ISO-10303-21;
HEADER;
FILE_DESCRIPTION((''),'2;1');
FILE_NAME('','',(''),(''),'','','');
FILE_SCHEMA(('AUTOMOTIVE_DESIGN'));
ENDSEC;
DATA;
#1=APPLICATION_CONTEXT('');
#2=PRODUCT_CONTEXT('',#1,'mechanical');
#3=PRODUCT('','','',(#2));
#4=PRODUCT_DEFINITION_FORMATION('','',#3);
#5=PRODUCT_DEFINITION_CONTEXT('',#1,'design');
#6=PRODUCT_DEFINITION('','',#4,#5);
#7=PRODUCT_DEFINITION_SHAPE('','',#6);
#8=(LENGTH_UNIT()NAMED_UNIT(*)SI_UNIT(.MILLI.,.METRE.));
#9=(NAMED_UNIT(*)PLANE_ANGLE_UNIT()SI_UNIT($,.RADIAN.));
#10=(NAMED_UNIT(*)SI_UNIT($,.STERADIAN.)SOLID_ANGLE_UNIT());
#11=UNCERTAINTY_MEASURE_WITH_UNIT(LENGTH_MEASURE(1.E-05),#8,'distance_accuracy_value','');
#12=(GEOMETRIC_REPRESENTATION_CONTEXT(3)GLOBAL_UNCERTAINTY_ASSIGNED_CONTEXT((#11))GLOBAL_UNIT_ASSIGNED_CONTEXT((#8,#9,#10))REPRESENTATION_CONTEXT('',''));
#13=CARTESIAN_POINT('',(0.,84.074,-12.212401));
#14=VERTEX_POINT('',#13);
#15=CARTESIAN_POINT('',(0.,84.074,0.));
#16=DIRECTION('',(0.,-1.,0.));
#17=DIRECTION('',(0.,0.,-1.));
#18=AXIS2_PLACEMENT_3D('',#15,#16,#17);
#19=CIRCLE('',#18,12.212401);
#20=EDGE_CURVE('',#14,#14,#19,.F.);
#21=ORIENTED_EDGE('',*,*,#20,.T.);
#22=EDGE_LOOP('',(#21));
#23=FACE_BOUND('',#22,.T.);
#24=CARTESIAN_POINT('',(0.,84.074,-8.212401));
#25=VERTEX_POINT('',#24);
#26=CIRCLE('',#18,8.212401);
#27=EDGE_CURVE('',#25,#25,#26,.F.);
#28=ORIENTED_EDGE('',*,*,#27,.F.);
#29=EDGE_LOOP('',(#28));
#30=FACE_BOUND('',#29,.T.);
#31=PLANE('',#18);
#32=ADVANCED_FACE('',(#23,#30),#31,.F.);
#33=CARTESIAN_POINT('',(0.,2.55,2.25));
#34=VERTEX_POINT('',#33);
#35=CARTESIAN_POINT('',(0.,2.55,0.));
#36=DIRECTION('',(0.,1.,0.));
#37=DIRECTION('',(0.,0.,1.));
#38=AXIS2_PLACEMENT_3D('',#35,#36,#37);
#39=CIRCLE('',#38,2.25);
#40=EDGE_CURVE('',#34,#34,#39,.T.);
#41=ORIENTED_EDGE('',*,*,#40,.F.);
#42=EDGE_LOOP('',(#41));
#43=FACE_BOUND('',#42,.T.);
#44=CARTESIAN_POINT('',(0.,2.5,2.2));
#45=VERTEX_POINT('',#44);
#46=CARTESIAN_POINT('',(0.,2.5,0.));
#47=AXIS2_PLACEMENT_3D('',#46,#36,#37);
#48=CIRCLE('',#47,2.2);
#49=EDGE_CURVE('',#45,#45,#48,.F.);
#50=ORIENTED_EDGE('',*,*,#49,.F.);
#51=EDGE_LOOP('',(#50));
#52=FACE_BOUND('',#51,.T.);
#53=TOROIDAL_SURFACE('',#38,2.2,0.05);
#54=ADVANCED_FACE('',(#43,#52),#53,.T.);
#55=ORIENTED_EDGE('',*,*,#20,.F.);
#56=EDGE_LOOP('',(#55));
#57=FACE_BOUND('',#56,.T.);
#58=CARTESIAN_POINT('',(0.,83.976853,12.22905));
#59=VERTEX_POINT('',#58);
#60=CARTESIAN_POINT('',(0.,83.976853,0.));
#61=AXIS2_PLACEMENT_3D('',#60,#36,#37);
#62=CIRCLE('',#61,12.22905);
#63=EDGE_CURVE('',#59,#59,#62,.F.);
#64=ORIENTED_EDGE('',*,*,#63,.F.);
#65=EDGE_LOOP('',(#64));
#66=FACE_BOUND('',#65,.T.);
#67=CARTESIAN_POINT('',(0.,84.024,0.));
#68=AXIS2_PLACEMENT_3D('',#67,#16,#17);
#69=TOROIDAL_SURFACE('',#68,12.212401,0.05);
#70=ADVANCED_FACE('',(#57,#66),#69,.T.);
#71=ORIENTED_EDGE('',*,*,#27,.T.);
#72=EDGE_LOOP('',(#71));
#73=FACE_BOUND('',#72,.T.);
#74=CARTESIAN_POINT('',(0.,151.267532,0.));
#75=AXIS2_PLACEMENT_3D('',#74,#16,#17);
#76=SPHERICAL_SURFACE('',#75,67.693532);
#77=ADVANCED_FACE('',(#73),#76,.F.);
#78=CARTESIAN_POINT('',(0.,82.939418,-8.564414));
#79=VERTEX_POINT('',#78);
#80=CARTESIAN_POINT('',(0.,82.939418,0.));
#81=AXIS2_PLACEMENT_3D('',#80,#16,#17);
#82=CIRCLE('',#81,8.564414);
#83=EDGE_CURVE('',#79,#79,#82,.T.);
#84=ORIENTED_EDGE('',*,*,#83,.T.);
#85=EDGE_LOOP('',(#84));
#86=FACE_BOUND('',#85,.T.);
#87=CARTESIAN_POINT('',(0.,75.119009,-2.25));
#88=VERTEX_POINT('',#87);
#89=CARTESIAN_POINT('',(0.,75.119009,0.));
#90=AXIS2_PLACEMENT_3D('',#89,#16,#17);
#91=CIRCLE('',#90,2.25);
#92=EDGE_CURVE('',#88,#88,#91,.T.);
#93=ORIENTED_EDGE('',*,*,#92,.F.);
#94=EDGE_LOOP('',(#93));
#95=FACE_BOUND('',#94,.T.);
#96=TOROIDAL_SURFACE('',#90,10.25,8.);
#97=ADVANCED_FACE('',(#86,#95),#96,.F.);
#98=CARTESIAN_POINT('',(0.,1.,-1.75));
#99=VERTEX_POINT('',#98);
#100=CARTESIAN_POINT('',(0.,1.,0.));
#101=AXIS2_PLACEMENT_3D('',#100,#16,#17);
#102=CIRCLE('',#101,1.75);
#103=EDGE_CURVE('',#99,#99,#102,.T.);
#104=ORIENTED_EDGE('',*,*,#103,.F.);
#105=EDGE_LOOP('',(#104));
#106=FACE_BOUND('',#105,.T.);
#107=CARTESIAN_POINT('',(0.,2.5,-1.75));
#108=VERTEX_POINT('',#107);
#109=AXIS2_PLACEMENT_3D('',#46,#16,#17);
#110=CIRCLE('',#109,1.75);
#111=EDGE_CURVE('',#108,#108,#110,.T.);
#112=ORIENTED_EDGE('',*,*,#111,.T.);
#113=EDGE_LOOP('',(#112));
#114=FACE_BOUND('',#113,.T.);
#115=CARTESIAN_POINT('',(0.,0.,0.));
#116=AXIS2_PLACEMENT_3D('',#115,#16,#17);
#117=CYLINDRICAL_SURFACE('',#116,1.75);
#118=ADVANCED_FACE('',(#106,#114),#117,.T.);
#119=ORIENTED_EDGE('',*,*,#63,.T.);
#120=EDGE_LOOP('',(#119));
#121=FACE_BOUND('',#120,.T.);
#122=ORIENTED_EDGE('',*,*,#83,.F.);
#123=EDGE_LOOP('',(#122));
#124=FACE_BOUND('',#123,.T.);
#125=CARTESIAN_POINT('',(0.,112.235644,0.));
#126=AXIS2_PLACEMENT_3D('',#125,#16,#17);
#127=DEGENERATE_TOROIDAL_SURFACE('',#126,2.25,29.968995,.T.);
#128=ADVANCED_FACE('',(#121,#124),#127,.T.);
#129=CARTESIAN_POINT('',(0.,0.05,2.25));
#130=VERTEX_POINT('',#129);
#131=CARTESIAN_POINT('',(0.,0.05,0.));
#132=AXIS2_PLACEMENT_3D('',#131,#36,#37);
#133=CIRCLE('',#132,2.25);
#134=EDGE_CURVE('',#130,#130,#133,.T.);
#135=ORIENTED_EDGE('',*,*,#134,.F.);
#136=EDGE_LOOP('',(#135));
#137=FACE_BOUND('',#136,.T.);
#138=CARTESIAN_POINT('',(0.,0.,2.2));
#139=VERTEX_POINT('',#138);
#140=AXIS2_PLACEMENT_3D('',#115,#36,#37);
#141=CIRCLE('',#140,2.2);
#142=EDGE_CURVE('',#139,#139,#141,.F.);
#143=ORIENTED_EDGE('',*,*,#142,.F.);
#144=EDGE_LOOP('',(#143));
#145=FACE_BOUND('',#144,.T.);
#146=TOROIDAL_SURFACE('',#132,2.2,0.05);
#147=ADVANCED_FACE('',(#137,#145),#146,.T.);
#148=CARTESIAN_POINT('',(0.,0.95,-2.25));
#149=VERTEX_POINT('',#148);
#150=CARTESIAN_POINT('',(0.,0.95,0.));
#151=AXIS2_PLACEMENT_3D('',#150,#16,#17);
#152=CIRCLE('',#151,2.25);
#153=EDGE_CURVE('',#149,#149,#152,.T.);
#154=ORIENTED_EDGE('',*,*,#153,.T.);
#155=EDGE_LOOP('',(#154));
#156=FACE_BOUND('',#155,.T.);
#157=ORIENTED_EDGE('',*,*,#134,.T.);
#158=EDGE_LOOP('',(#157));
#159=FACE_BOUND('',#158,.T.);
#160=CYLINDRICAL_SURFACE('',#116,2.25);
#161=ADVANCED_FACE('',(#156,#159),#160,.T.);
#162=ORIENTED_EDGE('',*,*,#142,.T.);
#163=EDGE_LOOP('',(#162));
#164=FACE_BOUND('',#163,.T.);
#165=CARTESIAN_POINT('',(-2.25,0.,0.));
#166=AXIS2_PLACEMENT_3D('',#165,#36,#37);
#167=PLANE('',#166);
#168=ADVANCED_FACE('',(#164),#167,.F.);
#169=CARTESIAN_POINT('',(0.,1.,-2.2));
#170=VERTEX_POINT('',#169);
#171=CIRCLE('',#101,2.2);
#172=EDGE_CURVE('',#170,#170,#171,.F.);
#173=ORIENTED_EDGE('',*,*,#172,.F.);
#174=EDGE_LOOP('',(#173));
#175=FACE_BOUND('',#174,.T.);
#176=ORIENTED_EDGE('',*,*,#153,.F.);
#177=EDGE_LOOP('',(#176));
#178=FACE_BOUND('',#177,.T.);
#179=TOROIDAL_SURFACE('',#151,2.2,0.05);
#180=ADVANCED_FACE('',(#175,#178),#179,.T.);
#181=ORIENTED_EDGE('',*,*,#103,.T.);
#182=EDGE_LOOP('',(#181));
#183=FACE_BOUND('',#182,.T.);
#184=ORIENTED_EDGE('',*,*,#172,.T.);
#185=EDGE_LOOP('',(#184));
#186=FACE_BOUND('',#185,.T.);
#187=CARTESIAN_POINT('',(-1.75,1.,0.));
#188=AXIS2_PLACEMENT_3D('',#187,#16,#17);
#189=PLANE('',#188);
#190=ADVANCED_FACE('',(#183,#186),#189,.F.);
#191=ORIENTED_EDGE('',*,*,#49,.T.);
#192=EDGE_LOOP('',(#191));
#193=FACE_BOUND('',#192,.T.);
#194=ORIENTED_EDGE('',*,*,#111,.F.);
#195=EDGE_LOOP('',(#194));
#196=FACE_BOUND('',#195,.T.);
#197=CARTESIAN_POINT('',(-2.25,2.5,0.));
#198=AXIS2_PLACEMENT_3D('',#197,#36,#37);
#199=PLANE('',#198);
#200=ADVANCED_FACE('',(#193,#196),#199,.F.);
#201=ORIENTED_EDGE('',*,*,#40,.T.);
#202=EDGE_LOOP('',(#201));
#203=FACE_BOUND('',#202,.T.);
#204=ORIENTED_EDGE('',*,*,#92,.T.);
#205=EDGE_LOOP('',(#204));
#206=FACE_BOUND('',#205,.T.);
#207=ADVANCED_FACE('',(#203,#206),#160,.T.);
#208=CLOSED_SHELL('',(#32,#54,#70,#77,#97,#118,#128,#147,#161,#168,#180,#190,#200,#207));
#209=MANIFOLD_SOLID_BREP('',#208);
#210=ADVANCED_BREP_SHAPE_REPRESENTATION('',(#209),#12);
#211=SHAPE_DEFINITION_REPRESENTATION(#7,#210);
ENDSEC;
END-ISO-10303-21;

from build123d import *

# Parameters (mm, degrees)
FILLET1_R = 0.05


# Read off the part's stored shape, not the designer's step: Dome1
with BuildPart() as part:
    # Sketch1 → Revolve1 (revolve)
    with BuildSketch(Plane.XY, mode=Mode.PRIVATE) as revolve1_sk:
        with BuildLine():
            Line((0, 0), (0, 84.074))
            Line((0, 84.074), (-12.5, 84.074))
            ThreePointArc((-12.5, 84.074), (-10.551612699, 83.439395634), (-8.564414173, 82.939417836))
            ThreePointArc((-8.564414173, 82.939417836), (-4.025665232, 80.144708235), (-2.25, 75.119008613))
            Line((-2.25, 75.119008613), (-2.25, 2.5))
            Line((-2.25, 2.5), (-1.75, 2.5))
            Line((-1.75, 2.5), (-1.75, 1))
            Line((-1.75, 1), (-2.25, 1))
            Line((-2.25, 1), (-2.25, 0))
            Line((-2.25, 0), (0, 0))
        make_face()
    revolve(revolve1_sk.sketch.rotate(Axis((0, 0, 0), (0, 1, 0)), 270), axis=Axis((0, 0, 0), (0, 1, 0)))

    # Fillet1
    fillet1_edges = [part.edges().sort_by_distance(p)[0] for p in [
        (0, 84.074, 12.5),
        (0, 0, 2.25),
        (0, 1, 2.25),
        (0, 2.5, 2.25),
    ]]
    fillet(fillet1_edges, radius=FILLET1_R)

    # Dome1 outline → Dome1 (revolve, cut)
    with BuildSketch(Plane.XY):
        with BuildLine():
            Line((0, 84.074000008), (0, 83.574))
            ThreePointArc((0, 83.574), (4.113803997, 83.699115626), (8.21240119, 84.074000008))
            Line((8.21240119, 84.074000008), (0, 84.074000008))
        make_face()
    revolve(axis=Axis((0, 0, 0), (0, 1, 0)), mode=Mode.SUBTRACT)


solid = part.part
